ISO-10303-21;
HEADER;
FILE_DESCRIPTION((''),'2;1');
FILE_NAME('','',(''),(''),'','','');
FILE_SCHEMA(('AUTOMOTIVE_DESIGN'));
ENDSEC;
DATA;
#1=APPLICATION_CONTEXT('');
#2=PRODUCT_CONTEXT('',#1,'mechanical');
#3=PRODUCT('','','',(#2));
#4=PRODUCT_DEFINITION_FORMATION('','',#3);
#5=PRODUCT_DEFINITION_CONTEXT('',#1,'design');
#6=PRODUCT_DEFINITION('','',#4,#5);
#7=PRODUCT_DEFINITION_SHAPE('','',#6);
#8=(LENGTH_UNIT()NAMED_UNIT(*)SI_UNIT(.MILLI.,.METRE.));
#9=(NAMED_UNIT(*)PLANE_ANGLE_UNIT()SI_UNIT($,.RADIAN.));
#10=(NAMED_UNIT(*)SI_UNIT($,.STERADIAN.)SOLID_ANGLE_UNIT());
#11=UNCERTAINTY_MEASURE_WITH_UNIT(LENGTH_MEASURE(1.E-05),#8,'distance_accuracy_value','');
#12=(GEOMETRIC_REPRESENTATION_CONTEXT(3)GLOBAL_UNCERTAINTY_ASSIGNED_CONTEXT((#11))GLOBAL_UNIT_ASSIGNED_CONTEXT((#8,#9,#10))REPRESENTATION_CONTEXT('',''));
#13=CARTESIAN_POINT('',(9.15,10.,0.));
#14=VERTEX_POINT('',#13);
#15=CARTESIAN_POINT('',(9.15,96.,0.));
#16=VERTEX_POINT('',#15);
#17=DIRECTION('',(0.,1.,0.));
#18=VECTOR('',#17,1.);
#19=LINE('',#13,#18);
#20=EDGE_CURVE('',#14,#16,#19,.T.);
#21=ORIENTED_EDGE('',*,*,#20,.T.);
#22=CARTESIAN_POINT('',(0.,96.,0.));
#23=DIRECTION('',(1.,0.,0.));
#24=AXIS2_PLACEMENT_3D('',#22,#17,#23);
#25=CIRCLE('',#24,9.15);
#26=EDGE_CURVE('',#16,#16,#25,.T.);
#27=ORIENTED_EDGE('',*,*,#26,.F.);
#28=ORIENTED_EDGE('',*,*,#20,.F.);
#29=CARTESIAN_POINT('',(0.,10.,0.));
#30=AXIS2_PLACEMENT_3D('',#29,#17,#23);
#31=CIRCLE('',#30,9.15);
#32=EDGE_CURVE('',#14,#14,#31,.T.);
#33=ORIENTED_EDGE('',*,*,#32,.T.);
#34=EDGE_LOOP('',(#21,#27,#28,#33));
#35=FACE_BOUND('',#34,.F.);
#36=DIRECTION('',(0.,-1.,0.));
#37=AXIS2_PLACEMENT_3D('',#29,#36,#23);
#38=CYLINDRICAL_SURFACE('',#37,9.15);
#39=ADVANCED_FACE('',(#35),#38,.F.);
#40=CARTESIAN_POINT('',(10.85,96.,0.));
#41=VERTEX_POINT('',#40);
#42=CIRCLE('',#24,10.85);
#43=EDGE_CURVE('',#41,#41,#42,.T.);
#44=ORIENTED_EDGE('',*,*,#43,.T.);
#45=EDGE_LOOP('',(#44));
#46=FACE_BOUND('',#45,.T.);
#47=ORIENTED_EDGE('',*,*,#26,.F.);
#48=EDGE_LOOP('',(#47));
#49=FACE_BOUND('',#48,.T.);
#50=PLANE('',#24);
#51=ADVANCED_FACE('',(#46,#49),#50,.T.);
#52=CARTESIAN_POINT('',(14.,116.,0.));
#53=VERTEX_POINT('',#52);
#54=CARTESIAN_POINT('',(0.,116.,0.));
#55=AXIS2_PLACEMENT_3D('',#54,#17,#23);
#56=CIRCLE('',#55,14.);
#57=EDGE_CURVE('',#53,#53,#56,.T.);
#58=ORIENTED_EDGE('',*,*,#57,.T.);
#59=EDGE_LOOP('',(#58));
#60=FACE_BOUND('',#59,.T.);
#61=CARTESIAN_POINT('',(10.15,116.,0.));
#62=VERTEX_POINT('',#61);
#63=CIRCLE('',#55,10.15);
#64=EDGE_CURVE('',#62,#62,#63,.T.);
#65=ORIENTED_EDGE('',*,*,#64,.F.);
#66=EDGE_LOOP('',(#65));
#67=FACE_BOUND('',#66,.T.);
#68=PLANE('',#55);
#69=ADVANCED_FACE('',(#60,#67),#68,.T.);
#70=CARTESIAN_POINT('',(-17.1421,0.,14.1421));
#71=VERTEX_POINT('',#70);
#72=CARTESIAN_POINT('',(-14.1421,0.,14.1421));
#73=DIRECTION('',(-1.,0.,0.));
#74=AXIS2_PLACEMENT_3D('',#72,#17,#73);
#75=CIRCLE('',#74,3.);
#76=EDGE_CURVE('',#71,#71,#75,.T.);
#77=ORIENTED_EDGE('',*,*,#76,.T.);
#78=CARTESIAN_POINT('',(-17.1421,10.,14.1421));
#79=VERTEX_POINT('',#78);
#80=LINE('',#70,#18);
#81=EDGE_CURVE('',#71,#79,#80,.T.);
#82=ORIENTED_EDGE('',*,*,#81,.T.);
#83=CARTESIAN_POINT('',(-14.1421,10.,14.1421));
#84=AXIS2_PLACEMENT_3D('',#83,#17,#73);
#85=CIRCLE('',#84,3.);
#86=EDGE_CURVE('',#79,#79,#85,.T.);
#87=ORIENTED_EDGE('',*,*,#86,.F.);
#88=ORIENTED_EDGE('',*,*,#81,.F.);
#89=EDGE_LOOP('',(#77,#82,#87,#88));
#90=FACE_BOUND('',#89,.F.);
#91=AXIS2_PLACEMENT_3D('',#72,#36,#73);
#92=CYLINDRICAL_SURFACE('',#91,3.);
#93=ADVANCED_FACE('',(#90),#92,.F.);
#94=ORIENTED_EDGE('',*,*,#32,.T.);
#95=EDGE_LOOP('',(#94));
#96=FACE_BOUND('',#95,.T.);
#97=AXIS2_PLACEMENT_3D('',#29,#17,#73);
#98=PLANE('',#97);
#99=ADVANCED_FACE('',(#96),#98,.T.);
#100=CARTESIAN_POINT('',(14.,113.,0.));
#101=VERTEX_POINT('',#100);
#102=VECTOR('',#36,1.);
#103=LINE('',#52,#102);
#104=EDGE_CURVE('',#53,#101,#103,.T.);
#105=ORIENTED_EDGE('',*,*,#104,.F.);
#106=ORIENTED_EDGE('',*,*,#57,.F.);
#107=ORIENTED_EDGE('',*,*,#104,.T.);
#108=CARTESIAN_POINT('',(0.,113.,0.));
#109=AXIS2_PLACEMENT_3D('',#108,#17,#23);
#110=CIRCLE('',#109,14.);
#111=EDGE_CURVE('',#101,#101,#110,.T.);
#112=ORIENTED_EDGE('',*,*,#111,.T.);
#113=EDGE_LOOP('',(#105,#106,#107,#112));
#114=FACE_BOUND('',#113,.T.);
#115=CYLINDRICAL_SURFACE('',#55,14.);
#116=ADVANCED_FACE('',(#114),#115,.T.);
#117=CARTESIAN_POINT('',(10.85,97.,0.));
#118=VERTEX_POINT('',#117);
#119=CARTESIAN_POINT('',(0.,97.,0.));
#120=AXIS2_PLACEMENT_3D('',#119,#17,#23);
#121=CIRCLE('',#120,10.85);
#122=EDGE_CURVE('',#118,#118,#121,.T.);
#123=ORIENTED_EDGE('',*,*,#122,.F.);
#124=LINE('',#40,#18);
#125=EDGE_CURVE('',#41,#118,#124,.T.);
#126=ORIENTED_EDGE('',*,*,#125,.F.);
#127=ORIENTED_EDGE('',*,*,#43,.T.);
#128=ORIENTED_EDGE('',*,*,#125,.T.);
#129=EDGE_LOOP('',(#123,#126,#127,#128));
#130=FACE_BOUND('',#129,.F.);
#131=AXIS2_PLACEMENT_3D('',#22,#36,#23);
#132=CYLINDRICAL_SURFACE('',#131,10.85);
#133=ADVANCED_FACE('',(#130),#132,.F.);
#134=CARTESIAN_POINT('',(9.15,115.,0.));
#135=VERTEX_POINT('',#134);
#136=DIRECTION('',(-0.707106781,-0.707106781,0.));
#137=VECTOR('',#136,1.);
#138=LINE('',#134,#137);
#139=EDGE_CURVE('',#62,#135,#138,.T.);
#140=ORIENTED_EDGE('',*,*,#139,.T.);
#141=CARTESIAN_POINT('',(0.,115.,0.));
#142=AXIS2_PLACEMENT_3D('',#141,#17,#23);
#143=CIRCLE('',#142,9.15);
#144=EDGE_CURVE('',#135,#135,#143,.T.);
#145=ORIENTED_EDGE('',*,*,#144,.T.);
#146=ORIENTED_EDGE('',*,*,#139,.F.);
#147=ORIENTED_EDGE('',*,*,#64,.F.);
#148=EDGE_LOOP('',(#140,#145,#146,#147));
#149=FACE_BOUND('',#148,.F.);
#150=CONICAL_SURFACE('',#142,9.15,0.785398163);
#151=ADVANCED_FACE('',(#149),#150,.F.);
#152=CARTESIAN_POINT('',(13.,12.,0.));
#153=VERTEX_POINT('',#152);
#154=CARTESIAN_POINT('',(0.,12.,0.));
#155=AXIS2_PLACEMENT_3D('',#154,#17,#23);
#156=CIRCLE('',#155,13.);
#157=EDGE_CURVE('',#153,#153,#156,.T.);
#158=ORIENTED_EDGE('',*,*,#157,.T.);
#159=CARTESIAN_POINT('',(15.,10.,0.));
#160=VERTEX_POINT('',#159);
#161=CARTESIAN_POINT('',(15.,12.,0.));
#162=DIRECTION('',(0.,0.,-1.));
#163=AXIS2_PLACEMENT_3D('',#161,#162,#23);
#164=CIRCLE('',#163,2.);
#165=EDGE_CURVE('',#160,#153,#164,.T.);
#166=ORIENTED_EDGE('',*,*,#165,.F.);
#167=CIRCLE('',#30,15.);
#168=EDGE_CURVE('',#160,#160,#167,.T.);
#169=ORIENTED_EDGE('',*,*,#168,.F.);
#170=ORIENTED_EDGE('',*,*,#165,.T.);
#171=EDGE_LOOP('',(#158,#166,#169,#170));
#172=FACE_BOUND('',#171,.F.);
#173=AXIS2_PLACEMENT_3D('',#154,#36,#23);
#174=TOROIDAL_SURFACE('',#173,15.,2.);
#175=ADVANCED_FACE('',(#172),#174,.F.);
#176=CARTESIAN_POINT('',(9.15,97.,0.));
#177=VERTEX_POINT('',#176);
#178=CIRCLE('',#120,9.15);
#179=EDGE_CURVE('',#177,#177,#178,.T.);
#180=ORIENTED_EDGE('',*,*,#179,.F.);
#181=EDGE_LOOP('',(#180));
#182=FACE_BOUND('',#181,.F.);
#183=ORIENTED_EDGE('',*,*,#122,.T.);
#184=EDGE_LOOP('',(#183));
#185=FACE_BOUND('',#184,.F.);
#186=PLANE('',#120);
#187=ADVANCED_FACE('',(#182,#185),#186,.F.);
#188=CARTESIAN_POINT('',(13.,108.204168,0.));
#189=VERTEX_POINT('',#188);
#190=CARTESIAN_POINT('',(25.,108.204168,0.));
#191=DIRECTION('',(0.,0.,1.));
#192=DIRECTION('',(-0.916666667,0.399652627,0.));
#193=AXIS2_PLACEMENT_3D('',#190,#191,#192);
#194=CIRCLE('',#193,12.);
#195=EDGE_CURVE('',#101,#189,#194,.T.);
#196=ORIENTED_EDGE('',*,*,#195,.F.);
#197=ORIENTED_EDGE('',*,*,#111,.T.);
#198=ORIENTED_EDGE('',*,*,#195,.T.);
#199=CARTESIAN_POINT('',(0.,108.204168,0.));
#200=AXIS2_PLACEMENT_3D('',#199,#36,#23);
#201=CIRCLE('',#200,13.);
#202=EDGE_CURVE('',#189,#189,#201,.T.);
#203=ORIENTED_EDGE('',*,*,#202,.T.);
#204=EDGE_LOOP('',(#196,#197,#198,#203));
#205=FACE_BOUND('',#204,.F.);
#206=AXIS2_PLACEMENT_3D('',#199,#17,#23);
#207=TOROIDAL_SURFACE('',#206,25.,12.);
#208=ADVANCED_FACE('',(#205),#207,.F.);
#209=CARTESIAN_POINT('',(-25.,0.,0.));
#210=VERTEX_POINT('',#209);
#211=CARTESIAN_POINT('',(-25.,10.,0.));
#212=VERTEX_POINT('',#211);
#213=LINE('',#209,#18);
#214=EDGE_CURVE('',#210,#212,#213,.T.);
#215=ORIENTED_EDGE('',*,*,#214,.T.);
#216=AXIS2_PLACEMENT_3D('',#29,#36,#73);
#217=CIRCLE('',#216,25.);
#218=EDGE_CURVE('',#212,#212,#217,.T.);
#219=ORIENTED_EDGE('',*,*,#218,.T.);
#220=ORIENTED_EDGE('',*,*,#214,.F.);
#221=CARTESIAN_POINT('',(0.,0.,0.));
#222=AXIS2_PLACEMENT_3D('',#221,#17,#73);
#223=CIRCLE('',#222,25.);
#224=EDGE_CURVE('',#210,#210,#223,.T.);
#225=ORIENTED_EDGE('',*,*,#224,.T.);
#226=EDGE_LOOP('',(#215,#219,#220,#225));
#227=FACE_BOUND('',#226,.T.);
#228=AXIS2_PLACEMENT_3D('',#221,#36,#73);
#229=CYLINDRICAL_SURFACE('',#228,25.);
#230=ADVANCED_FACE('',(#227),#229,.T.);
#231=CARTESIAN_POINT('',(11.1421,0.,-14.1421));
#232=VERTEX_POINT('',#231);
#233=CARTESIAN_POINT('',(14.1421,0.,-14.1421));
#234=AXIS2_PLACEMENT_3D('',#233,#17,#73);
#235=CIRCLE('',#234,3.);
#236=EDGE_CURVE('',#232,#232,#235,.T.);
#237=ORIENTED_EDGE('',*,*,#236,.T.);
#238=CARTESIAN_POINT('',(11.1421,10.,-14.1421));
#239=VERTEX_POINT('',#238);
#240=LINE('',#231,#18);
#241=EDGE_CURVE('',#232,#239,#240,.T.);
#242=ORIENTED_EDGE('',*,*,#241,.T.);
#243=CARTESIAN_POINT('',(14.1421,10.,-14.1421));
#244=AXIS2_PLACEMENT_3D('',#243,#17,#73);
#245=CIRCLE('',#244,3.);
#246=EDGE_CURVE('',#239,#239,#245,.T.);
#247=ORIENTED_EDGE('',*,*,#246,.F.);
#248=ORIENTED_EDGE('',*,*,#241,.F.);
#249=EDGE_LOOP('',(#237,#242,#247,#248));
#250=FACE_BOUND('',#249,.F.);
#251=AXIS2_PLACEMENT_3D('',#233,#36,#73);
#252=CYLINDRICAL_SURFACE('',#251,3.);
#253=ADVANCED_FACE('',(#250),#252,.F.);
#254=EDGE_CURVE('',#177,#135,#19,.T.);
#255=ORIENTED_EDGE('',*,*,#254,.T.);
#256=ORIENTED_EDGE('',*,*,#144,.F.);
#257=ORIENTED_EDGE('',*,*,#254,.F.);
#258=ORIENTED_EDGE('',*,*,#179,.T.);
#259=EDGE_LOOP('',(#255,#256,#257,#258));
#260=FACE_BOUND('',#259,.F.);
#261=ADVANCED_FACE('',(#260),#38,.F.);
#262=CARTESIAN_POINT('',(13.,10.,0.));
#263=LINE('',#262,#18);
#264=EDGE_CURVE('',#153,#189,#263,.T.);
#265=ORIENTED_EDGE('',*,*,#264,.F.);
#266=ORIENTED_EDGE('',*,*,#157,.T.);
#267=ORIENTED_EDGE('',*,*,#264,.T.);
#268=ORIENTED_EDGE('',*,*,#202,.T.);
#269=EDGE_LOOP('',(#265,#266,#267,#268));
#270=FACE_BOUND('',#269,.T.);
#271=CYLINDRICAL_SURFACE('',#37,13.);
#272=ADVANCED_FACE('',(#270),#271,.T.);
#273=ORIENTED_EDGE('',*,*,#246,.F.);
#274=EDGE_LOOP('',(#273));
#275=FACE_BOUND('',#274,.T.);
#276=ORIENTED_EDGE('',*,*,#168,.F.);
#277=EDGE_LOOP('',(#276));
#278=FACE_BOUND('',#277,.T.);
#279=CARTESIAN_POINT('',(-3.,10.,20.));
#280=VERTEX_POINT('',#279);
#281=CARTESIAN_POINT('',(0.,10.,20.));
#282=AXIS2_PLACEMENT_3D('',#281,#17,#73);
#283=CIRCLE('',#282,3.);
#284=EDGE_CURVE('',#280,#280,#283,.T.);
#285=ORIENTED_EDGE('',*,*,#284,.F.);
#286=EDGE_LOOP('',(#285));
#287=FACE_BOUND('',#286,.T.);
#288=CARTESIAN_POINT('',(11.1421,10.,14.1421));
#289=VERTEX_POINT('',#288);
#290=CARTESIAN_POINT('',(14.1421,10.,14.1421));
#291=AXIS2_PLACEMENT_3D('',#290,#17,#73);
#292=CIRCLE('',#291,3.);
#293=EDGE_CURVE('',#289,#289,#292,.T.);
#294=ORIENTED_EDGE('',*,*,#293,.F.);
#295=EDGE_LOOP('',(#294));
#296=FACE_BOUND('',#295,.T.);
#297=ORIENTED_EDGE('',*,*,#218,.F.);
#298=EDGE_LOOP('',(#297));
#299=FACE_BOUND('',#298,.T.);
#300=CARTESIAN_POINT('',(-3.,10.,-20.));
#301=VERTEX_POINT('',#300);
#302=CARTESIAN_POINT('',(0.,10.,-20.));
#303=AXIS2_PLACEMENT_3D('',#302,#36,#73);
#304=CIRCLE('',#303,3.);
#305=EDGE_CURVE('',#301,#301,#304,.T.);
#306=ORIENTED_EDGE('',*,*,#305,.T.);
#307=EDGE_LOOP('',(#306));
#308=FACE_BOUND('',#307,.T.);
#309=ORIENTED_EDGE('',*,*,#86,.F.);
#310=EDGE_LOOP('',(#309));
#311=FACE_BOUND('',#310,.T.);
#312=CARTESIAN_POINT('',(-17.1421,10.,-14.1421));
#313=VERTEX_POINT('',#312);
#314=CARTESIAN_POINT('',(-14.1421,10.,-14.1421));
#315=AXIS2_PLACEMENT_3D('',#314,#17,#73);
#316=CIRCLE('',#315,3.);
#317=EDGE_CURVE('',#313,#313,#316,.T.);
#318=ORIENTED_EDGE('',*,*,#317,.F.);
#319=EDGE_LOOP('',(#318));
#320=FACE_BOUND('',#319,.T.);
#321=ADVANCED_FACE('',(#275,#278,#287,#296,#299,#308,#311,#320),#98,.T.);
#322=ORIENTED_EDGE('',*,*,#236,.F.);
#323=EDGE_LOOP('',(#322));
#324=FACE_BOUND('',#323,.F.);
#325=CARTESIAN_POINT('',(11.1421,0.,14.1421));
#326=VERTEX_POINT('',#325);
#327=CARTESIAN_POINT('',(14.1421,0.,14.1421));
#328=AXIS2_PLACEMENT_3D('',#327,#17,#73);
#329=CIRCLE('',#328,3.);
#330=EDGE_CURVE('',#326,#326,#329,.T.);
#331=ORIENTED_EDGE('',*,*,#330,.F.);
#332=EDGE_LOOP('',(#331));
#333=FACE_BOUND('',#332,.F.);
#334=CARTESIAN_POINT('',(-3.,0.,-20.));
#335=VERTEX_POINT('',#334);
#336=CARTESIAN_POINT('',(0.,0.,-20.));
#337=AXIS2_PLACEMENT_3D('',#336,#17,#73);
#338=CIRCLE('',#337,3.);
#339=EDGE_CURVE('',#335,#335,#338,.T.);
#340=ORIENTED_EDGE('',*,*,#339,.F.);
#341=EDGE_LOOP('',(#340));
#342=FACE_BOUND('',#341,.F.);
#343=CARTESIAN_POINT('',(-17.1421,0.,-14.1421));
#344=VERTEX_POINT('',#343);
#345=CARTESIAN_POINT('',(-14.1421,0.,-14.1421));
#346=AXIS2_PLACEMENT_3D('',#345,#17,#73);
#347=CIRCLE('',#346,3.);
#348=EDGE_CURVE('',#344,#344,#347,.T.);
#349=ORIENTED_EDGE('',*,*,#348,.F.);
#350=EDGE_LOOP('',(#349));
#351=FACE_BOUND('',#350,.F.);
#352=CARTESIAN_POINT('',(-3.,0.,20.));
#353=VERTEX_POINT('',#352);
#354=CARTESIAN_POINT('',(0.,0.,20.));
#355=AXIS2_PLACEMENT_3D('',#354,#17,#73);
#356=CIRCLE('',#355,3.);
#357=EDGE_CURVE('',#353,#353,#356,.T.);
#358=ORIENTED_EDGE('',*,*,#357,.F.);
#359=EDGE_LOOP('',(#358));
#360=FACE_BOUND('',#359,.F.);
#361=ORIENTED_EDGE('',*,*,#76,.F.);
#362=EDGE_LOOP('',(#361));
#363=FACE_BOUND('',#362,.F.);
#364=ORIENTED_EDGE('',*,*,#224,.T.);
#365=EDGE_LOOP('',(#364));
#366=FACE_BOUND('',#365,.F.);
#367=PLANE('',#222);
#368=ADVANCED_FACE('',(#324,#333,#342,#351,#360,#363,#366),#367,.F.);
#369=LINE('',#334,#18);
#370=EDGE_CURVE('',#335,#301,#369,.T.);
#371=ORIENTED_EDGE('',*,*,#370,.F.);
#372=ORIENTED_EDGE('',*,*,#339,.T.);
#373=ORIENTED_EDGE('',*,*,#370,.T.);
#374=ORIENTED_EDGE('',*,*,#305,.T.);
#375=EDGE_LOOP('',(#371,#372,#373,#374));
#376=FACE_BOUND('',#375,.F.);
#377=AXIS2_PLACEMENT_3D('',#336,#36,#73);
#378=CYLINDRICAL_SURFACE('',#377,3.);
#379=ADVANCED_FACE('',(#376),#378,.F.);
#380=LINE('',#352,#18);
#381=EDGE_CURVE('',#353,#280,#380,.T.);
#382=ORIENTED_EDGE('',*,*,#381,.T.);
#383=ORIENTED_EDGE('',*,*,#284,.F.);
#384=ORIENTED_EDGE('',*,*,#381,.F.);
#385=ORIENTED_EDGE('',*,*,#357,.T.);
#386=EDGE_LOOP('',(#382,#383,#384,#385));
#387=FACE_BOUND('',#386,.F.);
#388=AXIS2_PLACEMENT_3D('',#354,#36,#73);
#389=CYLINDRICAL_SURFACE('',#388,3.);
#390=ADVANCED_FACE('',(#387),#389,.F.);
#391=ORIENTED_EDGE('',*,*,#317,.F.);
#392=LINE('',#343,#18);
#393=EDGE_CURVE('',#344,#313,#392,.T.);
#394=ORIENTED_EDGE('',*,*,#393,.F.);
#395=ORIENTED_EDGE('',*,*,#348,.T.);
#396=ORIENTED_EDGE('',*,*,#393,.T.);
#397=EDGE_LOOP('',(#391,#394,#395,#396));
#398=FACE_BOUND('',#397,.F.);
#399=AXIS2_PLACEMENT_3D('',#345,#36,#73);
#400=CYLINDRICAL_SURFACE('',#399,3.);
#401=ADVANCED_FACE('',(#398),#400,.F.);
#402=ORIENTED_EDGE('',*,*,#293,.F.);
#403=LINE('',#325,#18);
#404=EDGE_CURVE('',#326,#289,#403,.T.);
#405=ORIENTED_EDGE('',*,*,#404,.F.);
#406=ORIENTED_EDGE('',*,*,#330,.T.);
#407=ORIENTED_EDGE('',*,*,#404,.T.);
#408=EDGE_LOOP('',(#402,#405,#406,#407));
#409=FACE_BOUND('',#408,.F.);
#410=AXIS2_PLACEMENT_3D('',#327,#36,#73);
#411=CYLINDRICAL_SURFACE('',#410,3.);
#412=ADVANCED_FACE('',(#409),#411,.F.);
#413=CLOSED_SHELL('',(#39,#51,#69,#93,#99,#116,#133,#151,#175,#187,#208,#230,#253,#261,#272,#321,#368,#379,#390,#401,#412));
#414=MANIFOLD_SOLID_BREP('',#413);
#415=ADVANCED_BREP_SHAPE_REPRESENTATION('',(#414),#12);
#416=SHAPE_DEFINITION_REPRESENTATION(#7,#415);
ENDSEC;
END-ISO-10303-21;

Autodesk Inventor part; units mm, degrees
ref_plane "YZ Plane" through (0, 0, 0) normal (1, 0, 0) x (0, 1, 0)
ref_plane "XZ Plane" through (0, 0, 0) normal (0, 1, 0) x (-1, 0, 0)
ref_plane "XY Plane" through (0, 0, 0) normal (0, 0, 1) x (1, 0, 0)
sketch "Boceto1" plane through (0, 0, 0) normal (0, 1, 0) x (-1, 0, 0)
  circle A0 centre (0, 0) radius 25
  circle A1 centre (0, -20) radius 3
  circle A2 centre (-14.1421, -14.1421) radius 3
  circle A3 centre (14.1421, -14.1421) radius 3
  circle A4 centre (0, 20) radius 3
  circle A5 centre (-14.1421, 14.1421) radius 3
  circle A6 centre (14.1421, 14.1421) radius 3
  line L0 (0, -23) -> (0, -28.5119)
  dimension "d2" = 6
  dimension "d0" = 50
  dimension "d4" = 6
  dimension "d6" = 6
extrude "Extrusión1" add sketch "Boceto1" along normal blind 10
sketch "Boceto2" plane through (0, 10, 0) normal (0, 1, 0) x (1, 0, 0)
  circle A0 centre (0, 0) radius 9.15
  circle A1 centre (0, 0) radius 13
  dimension "d9" = 18.3
  dimension "d10" = 26
extrude "Extrusión2" add sketch "Boceto2" along normal blind 106
fillet "Empalme1" radius 2 1 edges at (-13, 10, 0)
chamfer "Chaflán1" distance 1 angle 45 1 edges at (-9.15, 116, 0)
sketch "Boceto4" plane through (0, 116, 0) normal (0, 1, 0) x (1, 0, 0)
  circle A0 centre (0, 0) radius 11
  circle A1 centre (0, 0) radius 14
  dimension "d22" = 28
extrude "Extrusión4" add sketch "Boceto4" against normal blind 3
fillet "Empalme3" radius 12 1 edges at (-13, 113, 0)
thread "Thread1" size "M6x1" class "6H" standard "ANSI Metric M Profile" full length
thread "Thread2" size "M6x1" class "6H" standard "ANSI Metric M Profile" full length
thread "Thread3" size "M6x1" class "6H" standard "ANSI Metric M Profile" full length
thread "Thread4" size "M6x1" class "6H" standard "ANSI Metric M Profile" full length
thread "Thread5" size "M6x1" class "6H" standard "ANSI Metric M Profile" full length
thread "Thread6" size "M6x1" class "6H" standard "ANSI Metric M Profile" full length
chamfer "Chamfer2" [suppressed]
ref_plane "Work Plane1" through (0, 96, 0) normal (0, 1, 0) x (1, 0, 0)
sketch "Sketch5" plane through (0, 96, 0) normal (0, 1, 0) x (1, 0, 0)
  circle A0 centre (0, 0) radius 13 projected
  circle A1 centre (0, 0) radius 13 projected
  circle A2 centre (0, 0) radius 9.15 projected
  circle A3 centre (0, 0) radius 9.15 projected
  circle A4 centre (0, 0) radius 9.15 projected
  circle A5 centre (0, 0) radius 9.15 projected
  circle A6 centre (0, 0) radius 10.85
  dimension "d43" = 1.7
extrude "Extrusion5" cut sketch "Sketch5" along normal blind 1 contours A6
thread "Thread7" size "M20x2.5" class "6H" standard "ANSI Metric M Profile" full length
properties part number "herramienta2"
